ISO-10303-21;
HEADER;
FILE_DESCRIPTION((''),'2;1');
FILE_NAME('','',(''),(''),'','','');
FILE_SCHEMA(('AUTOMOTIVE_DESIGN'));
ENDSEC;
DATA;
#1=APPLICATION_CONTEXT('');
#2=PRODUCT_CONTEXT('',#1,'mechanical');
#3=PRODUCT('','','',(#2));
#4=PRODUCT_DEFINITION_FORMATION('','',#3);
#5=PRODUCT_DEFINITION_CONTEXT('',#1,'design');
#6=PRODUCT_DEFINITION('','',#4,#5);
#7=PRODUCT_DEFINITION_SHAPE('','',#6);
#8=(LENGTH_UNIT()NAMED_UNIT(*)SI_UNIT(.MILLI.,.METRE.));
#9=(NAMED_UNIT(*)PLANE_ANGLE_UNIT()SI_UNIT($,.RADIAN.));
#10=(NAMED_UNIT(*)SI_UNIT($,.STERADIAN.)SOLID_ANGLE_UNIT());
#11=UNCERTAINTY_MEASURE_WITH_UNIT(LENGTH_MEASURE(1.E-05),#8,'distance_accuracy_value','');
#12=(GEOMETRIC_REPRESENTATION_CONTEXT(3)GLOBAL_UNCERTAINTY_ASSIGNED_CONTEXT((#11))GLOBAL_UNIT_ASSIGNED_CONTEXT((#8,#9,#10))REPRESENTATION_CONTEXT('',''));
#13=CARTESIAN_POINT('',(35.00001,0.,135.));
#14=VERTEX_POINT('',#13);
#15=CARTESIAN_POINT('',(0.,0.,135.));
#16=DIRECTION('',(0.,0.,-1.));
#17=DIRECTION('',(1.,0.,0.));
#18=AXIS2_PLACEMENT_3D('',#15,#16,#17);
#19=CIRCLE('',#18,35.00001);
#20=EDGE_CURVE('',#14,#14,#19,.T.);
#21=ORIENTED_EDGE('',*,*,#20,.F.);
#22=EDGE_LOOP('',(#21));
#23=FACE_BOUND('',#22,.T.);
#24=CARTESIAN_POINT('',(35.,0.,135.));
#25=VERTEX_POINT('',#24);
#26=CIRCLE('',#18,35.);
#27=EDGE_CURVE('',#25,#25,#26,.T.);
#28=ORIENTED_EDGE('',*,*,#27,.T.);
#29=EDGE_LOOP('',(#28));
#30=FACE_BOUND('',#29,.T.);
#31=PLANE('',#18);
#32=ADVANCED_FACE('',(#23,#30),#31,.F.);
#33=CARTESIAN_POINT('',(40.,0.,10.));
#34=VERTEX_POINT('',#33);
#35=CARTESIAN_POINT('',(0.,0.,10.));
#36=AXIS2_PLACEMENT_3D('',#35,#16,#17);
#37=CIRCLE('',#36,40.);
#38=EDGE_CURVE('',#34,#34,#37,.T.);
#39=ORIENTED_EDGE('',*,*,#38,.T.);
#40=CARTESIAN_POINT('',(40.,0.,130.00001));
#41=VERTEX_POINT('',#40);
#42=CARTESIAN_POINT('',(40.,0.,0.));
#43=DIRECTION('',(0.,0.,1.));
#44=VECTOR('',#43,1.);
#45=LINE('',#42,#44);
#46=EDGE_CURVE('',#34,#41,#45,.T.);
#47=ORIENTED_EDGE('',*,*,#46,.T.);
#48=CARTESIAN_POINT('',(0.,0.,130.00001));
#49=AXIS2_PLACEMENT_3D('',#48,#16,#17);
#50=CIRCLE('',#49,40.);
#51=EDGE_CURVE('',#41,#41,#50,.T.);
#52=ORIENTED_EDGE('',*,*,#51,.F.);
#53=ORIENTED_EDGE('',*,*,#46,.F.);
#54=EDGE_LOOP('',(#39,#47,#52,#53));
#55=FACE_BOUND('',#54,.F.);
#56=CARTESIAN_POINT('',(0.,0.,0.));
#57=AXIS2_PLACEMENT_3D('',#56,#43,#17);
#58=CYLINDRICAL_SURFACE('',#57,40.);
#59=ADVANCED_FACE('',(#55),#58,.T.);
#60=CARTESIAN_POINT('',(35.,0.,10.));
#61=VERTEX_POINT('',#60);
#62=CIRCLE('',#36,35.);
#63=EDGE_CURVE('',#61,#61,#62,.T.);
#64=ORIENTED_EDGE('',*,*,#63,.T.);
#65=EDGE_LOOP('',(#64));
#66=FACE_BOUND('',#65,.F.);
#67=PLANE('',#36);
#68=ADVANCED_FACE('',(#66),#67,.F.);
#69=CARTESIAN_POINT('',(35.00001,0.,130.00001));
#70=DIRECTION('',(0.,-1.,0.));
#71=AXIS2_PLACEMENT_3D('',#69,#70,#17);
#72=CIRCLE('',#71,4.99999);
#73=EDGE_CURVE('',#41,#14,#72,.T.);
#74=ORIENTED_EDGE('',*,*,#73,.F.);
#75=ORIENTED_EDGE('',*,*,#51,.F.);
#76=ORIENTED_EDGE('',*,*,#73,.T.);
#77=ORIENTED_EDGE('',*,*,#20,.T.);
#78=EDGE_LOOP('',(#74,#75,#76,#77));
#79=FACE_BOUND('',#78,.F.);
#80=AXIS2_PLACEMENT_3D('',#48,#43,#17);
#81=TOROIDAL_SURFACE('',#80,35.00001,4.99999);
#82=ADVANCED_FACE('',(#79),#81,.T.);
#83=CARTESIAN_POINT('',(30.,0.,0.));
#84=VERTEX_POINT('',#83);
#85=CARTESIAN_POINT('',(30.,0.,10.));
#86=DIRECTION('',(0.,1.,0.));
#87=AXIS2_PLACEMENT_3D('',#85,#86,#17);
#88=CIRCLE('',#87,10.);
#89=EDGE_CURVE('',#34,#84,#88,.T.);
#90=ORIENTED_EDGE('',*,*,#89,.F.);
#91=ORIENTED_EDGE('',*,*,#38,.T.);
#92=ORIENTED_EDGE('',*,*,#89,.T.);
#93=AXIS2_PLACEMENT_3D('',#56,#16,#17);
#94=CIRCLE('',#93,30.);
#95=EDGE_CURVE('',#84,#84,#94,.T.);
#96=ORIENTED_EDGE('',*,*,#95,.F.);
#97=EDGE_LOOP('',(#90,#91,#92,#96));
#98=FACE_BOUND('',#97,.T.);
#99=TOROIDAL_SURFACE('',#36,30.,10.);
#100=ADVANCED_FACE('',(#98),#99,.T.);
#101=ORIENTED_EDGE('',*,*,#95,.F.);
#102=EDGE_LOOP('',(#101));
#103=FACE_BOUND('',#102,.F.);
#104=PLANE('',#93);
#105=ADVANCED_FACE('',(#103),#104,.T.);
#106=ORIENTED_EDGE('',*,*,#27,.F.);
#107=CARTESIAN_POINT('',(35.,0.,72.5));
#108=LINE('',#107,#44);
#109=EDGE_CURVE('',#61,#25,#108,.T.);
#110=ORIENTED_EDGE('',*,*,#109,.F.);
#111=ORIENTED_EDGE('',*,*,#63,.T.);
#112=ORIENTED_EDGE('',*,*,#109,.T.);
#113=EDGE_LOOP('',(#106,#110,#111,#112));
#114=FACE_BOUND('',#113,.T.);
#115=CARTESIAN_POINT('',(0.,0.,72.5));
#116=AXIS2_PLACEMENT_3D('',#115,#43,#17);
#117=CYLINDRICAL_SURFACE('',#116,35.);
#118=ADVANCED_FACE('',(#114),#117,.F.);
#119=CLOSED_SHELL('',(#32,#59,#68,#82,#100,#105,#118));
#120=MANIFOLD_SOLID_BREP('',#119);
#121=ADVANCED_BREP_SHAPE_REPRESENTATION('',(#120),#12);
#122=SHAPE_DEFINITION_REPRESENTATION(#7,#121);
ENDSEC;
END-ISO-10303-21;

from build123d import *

# Parameters (mm, degrees)
F0_W   = 35
F0_H   = 10
F0_W_2 = 5
F0_H_2 = 125
F2_R   = 4.99999
F3_R   = 10


# Not quite as in the source:
# - a fillet or chamfer is up to 0.001 mm smaller than in the source, because OpenCascade refuses the exact size


with BuildPart() as f1:
    # F0 (on Front) → F1 (revolve)
    with BuildSketch(Plane.XZ):
        with Locations((17.5, 5)):
            Rectangle(F0_W, F0_H)
        with Locations((37.5, 5)):
            Rectangle(F0_W_2, F0_H)
        with Locations((37.5, 72.5)):
            Rectangle(F0_W_2, F0_H_2)
    revolve(axis=Axis((0, 0, 5), (0, 0, -1)))

    # F2 (radius 5 in the source; OpenCascade refuses exactly that, so slightly less here)
    f2_edges = [f1.edges().sort_by_distance(p)[0] for p in [
        (-40, 0, 135),
    ]]
    fillet(f2_edges, radius=F2_R)

    # F3
    f3_edges = [f1.edges().sort_by_distance(p)[0] for p in [
        (-40, 0, 0),
    ]]
    fillet(f3_edges, radius=F3_R)


solid = f1.part
